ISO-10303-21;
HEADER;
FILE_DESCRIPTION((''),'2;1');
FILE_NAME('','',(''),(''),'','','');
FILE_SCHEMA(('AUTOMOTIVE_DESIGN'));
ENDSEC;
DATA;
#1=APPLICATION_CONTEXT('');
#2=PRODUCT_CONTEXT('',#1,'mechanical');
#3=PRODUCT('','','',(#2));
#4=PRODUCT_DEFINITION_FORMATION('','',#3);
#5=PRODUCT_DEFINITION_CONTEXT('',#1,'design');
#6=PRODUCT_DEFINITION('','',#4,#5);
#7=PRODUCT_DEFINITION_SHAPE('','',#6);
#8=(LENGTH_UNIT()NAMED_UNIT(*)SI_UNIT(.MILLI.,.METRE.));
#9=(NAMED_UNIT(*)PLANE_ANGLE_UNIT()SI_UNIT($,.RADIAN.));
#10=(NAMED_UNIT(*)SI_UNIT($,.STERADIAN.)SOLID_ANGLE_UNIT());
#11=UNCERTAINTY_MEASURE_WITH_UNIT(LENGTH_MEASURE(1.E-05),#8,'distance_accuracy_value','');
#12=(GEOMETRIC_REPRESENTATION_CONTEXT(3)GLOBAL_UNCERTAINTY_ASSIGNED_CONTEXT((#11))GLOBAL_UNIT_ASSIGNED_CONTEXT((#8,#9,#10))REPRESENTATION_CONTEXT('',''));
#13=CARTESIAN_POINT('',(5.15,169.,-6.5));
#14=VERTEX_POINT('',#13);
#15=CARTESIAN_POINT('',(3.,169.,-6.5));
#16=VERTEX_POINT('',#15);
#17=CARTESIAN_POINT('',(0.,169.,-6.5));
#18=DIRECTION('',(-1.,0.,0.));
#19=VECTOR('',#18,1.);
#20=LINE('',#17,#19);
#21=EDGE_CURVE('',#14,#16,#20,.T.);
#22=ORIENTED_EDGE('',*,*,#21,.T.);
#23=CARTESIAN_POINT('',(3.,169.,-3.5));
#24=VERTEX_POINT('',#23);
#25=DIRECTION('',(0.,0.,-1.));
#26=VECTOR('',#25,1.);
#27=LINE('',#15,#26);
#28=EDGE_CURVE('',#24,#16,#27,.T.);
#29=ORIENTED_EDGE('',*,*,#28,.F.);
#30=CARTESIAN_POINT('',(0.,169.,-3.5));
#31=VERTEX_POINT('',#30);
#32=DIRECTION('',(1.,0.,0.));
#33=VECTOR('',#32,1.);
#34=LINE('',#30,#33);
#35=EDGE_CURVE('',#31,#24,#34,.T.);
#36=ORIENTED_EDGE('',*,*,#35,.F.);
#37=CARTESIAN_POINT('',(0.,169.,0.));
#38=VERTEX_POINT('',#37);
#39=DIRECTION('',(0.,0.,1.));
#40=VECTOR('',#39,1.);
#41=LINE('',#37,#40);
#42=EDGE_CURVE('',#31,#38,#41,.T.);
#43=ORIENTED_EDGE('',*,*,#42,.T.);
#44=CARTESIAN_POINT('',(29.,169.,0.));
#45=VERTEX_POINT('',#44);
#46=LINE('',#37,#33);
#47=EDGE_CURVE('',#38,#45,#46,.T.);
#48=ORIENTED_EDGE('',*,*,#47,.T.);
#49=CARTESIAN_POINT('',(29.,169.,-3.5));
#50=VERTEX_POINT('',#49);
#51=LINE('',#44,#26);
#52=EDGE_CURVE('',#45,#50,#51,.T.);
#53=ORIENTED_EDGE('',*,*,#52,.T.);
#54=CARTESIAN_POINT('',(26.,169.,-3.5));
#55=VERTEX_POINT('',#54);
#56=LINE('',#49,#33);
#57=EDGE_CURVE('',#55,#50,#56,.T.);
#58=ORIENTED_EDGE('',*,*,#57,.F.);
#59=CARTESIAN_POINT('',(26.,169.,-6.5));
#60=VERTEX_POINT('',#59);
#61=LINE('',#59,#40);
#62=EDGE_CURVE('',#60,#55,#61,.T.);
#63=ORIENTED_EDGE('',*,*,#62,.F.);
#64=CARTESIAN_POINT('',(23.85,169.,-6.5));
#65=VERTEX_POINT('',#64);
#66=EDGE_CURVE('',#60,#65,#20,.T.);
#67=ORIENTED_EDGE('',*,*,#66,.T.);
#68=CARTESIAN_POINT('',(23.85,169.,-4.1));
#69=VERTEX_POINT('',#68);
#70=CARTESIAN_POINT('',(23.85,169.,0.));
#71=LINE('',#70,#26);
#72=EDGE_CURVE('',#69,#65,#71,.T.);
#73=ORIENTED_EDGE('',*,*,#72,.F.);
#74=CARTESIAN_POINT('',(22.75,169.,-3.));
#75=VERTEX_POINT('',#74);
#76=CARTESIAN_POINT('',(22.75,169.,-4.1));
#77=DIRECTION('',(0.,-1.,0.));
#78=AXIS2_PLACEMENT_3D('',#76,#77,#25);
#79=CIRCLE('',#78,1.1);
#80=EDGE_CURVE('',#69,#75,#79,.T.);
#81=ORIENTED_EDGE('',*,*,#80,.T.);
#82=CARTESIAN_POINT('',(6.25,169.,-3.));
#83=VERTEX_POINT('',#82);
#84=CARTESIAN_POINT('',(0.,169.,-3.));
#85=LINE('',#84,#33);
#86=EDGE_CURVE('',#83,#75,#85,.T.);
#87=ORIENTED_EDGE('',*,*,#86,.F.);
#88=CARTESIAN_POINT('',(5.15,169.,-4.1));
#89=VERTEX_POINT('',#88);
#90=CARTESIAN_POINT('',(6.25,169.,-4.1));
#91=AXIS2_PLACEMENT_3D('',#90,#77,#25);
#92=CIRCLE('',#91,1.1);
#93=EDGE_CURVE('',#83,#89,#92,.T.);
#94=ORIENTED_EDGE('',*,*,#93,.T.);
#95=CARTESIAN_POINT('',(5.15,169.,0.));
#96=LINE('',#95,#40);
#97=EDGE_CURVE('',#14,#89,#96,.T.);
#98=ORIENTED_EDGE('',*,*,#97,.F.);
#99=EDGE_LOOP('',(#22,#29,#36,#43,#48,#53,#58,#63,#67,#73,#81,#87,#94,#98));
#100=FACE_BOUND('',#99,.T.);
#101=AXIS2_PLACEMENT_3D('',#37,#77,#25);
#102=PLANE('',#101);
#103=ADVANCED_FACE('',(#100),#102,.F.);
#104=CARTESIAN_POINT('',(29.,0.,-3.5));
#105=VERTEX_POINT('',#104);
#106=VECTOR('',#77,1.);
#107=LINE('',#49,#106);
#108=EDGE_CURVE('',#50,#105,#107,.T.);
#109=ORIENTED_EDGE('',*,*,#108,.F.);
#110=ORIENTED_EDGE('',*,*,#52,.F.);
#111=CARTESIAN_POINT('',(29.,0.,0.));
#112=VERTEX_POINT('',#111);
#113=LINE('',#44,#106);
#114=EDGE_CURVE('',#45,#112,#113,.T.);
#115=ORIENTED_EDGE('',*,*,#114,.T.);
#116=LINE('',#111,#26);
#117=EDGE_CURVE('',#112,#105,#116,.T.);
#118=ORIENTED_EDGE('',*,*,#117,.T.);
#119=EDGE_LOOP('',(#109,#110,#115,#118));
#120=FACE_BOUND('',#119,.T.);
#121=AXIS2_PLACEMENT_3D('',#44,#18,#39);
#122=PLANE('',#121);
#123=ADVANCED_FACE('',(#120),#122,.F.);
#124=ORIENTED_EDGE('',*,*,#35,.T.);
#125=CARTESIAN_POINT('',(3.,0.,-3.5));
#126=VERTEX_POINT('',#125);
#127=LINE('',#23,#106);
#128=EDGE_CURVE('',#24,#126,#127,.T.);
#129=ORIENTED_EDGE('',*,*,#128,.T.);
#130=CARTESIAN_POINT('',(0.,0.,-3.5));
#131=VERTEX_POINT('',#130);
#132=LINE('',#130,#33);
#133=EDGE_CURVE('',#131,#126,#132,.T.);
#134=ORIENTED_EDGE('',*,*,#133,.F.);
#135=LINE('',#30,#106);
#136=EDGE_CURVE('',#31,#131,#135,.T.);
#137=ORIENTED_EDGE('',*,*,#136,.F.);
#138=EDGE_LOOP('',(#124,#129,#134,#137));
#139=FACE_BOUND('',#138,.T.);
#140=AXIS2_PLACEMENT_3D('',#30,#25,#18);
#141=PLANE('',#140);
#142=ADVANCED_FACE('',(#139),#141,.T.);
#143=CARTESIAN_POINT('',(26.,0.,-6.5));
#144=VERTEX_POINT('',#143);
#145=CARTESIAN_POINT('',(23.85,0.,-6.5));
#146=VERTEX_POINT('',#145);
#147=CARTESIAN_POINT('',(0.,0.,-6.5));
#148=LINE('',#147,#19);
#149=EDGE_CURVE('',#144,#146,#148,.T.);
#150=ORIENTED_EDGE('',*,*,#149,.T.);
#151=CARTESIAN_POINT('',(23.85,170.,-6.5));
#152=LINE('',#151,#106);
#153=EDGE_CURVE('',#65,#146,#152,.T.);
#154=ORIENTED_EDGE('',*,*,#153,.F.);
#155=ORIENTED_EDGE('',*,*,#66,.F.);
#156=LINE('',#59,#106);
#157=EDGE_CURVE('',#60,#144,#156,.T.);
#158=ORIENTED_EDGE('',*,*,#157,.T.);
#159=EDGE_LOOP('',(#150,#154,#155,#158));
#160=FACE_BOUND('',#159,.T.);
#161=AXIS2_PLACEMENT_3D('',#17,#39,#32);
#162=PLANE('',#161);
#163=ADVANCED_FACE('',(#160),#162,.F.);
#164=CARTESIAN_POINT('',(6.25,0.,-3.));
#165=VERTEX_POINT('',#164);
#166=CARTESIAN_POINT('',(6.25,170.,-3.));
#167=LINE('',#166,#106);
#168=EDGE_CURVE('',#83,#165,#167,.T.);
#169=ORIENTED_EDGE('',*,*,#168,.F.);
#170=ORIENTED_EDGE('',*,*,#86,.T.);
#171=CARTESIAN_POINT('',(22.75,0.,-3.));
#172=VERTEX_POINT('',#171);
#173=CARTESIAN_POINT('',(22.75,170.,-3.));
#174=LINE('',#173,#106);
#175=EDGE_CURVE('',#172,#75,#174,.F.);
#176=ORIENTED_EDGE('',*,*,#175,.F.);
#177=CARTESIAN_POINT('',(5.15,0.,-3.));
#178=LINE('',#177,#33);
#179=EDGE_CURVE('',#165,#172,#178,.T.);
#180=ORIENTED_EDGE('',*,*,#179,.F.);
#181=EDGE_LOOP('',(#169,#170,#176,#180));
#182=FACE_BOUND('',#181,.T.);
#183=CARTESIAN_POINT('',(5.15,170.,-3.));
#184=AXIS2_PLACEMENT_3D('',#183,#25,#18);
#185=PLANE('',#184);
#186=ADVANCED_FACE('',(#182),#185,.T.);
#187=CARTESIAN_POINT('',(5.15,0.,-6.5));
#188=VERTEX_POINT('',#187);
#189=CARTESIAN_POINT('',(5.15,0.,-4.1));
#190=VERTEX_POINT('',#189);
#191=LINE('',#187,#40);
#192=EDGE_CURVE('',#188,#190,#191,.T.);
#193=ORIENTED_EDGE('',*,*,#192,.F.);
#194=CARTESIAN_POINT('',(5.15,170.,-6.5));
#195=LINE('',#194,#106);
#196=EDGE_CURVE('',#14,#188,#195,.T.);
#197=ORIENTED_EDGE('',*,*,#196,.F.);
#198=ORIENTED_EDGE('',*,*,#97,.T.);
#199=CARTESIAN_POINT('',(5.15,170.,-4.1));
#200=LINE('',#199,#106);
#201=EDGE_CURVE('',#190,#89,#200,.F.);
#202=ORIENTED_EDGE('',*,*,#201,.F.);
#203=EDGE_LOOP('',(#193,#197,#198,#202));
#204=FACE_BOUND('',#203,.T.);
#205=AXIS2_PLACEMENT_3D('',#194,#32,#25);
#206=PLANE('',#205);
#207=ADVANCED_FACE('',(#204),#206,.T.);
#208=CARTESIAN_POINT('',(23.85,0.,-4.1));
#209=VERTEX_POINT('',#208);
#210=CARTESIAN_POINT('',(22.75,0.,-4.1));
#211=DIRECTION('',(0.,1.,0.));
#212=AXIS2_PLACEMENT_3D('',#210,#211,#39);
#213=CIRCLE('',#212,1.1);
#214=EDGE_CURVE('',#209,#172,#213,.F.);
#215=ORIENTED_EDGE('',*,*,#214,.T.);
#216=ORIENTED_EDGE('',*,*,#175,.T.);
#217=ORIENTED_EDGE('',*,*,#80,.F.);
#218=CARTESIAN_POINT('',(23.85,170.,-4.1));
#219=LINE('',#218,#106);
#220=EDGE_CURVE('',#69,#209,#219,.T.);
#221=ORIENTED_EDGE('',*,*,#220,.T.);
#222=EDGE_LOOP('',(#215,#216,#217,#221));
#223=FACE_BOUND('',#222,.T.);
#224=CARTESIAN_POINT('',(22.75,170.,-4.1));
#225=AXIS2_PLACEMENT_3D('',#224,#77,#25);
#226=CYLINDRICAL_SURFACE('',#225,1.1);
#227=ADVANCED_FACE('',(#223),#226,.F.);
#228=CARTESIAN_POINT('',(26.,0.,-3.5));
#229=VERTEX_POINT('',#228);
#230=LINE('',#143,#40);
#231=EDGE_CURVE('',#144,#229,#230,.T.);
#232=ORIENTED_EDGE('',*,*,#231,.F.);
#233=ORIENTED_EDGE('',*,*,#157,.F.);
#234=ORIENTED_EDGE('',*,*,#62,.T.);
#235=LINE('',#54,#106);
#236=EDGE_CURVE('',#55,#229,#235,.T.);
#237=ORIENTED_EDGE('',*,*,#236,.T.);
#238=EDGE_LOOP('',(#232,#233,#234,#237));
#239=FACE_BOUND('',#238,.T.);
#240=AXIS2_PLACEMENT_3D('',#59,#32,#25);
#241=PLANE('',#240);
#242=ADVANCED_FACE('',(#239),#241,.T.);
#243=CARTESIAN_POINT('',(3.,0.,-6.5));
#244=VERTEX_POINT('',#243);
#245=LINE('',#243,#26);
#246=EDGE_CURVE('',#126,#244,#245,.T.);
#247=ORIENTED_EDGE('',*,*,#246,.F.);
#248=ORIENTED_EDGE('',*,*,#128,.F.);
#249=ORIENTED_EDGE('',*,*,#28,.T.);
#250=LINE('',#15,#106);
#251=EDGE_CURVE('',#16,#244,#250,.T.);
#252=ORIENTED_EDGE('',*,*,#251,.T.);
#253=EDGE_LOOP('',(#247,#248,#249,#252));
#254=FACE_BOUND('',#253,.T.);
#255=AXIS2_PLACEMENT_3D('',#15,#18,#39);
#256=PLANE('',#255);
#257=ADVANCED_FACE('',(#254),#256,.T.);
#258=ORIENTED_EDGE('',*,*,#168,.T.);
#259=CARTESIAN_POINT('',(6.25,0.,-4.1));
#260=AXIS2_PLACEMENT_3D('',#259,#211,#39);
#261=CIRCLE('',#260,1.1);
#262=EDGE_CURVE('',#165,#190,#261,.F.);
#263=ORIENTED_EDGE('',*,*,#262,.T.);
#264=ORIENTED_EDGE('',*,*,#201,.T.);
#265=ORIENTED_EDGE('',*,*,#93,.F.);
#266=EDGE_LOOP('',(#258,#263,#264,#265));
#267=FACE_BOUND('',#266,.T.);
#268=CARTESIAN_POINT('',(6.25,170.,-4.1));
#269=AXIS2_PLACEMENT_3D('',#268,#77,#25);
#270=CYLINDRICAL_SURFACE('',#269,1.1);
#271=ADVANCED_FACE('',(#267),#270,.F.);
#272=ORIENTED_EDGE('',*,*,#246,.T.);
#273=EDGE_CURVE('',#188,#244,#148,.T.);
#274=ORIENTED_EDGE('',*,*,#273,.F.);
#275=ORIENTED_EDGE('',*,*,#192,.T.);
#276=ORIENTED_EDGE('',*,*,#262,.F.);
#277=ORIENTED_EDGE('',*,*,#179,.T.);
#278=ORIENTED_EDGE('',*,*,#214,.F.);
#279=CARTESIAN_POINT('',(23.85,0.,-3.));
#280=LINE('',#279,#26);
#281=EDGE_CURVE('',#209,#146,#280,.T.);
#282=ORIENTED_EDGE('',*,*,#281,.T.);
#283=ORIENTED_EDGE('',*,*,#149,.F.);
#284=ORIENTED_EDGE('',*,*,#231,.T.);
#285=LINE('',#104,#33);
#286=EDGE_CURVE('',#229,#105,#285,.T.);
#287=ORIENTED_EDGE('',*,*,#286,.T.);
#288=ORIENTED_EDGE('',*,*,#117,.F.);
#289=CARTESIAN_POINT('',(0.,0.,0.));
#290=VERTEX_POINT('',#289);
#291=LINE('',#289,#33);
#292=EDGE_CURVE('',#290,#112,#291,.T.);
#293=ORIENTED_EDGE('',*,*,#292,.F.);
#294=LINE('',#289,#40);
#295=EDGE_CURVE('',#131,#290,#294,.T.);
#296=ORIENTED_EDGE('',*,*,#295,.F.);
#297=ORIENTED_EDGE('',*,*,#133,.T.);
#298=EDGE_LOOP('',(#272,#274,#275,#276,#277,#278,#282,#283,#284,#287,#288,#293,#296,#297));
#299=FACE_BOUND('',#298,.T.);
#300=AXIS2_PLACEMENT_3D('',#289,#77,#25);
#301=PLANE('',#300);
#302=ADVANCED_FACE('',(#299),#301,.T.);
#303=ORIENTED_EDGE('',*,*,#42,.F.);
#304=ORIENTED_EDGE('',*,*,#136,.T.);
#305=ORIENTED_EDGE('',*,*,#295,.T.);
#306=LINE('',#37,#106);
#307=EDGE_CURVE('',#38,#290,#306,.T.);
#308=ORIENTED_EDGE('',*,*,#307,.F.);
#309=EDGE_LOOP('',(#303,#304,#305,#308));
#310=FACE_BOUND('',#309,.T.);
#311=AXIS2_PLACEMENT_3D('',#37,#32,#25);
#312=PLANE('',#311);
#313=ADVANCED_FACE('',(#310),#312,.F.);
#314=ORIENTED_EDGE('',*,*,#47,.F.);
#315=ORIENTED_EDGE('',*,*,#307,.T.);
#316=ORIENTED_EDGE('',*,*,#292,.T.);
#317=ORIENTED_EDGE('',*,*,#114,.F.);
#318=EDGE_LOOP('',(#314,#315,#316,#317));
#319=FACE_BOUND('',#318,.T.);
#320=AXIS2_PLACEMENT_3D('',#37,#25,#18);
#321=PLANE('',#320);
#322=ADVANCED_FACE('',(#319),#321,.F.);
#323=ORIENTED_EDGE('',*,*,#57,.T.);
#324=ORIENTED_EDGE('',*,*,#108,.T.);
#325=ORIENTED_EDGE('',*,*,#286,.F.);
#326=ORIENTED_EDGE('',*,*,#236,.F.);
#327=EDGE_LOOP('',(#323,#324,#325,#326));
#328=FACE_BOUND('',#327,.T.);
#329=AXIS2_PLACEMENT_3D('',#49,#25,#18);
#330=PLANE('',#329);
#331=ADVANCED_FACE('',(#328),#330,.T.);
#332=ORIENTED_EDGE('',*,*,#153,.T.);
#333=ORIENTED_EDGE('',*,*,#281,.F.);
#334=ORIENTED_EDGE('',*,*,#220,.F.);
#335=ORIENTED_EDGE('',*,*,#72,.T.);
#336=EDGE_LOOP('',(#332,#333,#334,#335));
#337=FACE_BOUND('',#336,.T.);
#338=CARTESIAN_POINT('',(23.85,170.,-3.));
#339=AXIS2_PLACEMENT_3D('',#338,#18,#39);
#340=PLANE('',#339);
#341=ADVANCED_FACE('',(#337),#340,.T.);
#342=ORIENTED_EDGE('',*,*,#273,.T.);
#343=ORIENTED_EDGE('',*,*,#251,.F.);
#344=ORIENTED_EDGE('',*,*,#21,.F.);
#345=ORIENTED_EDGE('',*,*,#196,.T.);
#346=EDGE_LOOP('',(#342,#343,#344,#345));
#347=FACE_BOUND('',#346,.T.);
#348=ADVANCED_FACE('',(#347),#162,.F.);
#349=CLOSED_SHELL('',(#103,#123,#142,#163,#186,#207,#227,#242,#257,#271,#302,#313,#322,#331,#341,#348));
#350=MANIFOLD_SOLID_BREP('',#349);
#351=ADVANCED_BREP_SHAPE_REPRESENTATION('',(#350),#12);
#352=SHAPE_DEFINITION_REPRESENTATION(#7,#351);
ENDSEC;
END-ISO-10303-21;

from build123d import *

# Parameters (mm, degrees)
SKETCH1_W                                  = 29
SKETCH1_H                                  = 6.5
TOP_PIECE_WITH_RIDGES_DEPTH                = 169
SUBTRACT_ACTUATOR_AND_BOTTOM_MOLD_OUTLIN_W = 3
SUBTRACT_ACTUATOR_AND_BOTTOM_MOLD_OUTLIN_H = 3
SUBTRACT_ACTUATOR_AND_BOTTOM_MOLD_DEPTH    = 169


# Read off the part's stored shape, not the designer's step: subtract actuator and bottom mold
with BuildPart() as part:
    # Sketch1 → top piece with ridges (new body)
    with BuildSketch(Plane(origin=(0, 0, 0), x_dir=(1, 0, 0), z_dir=(0, 1, 0))):
        with Locations((14.5, 3.25)):
            Rectangle(SKETCH1_W, SKETCH1_H)
    extrude(amount=TOP_PIECE_WITH_RIDGES_DEPTH)

    # subtract actuator and bottom mold outlin → subtract actuator and bottom mold (cut)
    with BuildSketch(Plane(origin=(0, 0, 0), x_dir=(1, 0, 0), z_dir=(0, 1, 0))):
        with Locations((27.5, 5)):
            Rectangle(SUBTRACT_ACTUATOR_AND_BOTTOM_MOLD_OUTLIN_W, SUBTRACT_ACTUATOR_AND_BOTTOM_MOLD_OUTLIN_H)
        with BuildLine():
            Line((23.85, 6.5), (5.15, 6.5))
            Line((5.15, 6.5), (5.15, 4.1))
            ThreePointArc((5.15, 4.1), (5.472182541, 3.322182541), (6.25, 3))
            Line((6.25, 3), (22.75, 3))
            ThreePointArc((22.75, 3), (23.527817459, 3.322182541), (23.85, 4.1))
            Line((23.85, 4.1), (23.85, 6.5))
        make_face()
        with Locations((1.5, 5)):
            Rectangle(SUBTRACT_ACTUATOR_AND_BOTTOM_MOLD_OUTLIN_W, SUBTRACT_ACTUATOR_AND_BOTTOM_MOLD_OUTLIN_H)
    extrude(amount=SUBTRACT_ACTUATOR_AND_BOTTOM_MOLD_DEPTH, mode=Mode.SUBTRACT)


solid = part.part
